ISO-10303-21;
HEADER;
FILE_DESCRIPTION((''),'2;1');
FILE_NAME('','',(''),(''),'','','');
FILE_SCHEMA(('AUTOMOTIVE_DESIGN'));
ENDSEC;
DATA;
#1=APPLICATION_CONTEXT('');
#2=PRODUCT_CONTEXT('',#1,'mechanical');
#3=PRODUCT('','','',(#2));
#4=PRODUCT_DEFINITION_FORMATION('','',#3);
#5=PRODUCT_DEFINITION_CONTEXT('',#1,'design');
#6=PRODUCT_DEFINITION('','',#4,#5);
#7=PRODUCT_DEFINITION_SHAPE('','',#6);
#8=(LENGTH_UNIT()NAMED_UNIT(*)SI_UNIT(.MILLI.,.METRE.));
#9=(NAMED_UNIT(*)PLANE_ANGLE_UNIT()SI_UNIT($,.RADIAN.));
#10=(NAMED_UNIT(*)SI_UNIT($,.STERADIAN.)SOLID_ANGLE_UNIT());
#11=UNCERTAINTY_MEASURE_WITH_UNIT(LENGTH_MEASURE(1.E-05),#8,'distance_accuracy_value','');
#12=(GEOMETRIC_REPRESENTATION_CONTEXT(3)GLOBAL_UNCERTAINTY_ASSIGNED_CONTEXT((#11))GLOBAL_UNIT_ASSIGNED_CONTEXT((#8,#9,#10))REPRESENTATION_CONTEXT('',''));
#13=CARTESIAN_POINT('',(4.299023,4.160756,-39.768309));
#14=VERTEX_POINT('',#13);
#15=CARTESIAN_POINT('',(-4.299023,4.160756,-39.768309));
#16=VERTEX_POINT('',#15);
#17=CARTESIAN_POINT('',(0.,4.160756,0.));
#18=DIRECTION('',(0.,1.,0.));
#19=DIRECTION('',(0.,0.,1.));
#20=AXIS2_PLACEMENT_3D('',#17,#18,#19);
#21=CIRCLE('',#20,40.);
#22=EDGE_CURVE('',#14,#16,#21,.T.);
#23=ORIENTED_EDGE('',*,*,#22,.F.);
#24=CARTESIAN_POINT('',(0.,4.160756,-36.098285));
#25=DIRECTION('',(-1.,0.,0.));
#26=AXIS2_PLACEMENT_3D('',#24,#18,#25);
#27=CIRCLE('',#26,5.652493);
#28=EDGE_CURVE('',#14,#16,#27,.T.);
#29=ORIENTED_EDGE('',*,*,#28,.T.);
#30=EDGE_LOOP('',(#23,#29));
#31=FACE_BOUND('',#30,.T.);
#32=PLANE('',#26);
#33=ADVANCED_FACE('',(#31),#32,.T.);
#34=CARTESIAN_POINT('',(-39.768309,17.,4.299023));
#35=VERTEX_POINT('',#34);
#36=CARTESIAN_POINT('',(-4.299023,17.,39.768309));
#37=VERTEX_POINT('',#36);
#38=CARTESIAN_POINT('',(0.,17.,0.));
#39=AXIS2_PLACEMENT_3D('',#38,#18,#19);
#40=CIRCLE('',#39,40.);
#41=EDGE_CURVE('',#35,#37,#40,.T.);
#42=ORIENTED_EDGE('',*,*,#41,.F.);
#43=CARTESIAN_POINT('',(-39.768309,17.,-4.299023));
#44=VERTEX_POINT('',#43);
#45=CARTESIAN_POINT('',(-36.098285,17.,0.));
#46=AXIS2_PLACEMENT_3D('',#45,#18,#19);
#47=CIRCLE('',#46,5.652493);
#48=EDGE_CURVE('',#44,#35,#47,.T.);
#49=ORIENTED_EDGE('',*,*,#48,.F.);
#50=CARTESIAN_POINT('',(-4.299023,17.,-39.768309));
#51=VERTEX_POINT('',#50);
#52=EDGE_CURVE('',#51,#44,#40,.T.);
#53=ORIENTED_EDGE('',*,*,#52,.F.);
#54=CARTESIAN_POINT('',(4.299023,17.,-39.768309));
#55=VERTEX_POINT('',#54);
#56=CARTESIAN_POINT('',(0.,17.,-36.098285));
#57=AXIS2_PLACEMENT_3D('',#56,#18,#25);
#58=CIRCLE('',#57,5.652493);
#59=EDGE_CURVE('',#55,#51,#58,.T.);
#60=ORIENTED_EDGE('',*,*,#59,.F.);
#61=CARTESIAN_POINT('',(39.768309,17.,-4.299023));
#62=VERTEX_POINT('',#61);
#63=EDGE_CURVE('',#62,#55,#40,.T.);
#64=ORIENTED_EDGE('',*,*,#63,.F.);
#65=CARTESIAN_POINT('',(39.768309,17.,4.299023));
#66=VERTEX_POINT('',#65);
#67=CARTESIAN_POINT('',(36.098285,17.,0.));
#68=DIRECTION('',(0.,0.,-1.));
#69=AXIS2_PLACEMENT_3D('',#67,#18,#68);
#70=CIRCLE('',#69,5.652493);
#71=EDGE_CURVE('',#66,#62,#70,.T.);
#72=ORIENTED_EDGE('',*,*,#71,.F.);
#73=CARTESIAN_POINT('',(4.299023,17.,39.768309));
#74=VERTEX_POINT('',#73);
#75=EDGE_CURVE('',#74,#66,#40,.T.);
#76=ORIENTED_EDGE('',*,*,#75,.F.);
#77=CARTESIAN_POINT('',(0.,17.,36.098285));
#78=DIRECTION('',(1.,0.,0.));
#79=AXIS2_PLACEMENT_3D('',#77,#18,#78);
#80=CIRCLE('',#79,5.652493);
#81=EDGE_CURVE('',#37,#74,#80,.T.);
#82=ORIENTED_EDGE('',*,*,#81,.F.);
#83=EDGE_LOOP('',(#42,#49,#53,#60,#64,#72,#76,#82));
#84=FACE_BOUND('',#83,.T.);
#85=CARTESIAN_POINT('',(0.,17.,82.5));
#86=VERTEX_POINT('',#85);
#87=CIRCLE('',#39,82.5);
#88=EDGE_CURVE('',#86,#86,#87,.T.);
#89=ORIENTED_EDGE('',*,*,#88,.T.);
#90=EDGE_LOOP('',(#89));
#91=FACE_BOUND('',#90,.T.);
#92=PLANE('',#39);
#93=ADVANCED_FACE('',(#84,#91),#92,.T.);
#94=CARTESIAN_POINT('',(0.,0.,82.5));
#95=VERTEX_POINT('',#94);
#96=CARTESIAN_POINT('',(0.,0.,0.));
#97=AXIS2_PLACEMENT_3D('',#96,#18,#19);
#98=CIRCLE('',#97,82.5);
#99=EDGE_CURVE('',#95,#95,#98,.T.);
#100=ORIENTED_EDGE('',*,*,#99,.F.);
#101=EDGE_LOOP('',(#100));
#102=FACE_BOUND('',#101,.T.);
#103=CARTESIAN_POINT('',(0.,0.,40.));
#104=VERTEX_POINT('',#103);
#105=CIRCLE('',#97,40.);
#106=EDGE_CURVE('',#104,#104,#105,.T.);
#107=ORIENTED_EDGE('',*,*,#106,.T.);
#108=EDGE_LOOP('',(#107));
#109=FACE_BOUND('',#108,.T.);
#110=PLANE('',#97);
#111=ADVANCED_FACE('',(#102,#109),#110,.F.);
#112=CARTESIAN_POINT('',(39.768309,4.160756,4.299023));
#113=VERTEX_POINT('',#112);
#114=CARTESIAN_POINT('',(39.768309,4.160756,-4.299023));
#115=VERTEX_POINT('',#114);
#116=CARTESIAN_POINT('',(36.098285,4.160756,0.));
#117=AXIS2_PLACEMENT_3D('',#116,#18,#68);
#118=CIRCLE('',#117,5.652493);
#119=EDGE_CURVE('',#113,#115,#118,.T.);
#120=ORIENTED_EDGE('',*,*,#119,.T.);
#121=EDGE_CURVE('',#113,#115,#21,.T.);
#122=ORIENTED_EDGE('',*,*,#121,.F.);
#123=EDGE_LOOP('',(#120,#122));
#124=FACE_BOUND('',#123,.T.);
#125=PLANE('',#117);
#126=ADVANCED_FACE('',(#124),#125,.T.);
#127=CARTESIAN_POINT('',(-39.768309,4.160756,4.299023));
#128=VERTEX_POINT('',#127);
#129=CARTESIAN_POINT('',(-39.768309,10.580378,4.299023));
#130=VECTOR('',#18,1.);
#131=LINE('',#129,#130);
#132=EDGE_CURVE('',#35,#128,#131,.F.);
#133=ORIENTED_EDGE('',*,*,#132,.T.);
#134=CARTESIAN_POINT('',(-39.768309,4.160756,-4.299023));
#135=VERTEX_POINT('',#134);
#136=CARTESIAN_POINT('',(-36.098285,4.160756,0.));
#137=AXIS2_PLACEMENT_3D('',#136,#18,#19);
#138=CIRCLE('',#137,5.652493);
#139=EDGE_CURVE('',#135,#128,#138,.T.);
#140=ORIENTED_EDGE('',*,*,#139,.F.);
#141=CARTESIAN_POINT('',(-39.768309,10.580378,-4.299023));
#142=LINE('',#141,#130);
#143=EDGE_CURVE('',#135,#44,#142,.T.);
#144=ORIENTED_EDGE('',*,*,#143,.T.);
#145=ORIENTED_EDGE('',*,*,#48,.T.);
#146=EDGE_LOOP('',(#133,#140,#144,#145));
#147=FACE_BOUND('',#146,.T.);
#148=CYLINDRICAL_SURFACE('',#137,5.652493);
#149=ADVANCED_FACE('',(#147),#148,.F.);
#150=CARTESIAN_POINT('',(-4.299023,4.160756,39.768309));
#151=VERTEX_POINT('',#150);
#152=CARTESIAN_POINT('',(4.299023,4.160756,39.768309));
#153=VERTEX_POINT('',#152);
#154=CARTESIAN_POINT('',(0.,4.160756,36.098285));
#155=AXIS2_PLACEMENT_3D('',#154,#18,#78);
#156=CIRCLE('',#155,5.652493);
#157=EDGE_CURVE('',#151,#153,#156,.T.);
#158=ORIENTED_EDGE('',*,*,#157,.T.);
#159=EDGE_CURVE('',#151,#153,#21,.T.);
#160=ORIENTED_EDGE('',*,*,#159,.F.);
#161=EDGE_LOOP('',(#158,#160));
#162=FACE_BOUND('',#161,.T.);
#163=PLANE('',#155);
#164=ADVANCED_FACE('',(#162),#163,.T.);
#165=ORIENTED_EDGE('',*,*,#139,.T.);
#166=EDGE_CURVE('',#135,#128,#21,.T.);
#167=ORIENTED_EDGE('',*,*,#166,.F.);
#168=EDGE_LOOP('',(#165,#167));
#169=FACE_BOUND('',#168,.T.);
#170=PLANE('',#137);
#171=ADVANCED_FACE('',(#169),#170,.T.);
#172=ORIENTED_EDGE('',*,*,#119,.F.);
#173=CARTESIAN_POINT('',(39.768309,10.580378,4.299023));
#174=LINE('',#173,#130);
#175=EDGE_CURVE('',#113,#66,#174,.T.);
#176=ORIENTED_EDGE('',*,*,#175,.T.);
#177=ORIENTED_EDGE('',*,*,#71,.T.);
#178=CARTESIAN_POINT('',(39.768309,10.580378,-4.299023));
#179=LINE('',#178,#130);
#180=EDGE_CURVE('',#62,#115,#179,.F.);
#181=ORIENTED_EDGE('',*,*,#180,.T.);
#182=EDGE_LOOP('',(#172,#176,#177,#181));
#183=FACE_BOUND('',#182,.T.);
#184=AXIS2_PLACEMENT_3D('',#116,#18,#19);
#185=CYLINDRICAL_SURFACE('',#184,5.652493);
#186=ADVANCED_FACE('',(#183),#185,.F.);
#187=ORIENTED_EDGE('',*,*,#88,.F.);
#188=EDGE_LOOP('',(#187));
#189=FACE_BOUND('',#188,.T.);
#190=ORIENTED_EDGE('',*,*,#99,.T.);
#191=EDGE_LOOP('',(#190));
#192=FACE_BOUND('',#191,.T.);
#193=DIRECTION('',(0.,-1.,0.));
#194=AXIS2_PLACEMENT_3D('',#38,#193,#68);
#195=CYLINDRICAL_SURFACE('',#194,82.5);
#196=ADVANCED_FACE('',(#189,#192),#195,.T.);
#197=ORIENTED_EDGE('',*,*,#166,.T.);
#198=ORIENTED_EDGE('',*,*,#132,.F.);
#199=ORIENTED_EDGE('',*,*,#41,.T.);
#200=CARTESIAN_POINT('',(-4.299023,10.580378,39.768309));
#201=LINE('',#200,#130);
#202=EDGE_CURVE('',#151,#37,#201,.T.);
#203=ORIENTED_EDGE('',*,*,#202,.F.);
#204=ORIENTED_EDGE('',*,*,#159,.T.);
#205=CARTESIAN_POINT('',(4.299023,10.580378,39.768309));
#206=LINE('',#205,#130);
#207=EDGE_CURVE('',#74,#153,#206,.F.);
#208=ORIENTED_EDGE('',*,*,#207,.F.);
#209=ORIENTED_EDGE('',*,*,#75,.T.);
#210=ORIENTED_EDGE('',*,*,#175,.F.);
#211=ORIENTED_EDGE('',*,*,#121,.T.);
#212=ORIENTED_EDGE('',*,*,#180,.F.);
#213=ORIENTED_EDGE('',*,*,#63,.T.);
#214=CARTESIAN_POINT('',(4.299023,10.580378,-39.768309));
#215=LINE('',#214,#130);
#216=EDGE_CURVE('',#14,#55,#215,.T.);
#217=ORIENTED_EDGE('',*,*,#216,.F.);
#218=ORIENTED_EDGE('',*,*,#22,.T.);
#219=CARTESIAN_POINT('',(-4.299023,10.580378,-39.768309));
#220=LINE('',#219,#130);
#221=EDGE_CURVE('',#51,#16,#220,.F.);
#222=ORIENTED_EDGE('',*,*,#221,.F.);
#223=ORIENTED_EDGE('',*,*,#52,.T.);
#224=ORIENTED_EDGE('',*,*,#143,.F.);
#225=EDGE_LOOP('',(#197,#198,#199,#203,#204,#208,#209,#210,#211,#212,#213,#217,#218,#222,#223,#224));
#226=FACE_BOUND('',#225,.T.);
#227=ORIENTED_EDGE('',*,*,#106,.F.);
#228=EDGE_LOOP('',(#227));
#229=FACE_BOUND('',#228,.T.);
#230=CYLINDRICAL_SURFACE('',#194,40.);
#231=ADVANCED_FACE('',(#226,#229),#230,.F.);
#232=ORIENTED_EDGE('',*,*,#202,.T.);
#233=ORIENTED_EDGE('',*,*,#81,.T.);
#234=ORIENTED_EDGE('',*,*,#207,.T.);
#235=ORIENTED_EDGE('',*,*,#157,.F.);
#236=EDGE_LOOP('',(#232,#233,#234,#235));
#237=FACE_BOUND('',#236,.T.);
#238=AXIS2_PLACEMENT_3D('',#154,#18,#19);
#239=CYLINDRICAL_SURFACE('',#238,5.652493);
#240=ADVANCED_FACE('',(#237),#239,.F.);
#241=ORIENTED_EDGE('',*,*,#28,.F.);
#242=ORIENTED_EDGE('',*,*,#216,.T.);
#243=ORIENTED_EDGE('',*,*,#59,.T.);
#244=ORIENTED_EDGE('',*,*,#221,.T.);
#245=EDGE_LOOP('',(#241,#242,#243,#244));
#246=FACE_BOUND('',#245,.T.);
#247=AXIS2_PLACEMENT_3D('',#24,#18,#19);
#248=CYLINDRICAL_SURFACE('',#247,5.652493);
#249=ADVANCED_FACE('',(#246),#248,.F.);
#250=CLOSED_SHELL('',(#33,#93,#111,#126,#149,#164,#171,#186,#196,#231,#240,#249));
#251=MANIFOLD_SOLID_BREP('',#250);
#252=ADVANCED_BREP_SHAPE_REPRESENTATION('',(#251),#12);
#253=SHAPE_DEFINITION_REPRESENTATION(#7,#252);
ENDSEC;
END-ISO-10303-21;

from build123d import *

# Parameters (mm, degrees)
SKETCH1_R           = 82.5
BOSS_EXTRUDE1_DEPTH = 17
SKETCH2_R           = 40
CUT_EXTRUDE1_DEPTH  = 118.904622471
SKETCH3_R           = 5.652492576
CUT_EXTRUDE2_DEPTH  = 12.839244405
CIRPATTERN1_COUNT   = 4


with BuildPart() as part:
    # Sketch1 → Boss-Extrude1 (new body)
    with BuildSketch(Plane(origin=(0, 0, 0), x_dir=(1, 0, 0), z_dir=(0, 1, 0))):
        Circle(SKETCH1_R)
    extrude(amount=BOSS_EXTRUDE1_DEPTH)

    # Sketch2 → Cut-Extrude1 (cut, through all)
    with BuildSketch(Plane(origin=(0, 0, 0), x_dir=(1, 0, 0), z_dir=(0, 1, 0))):
        Circle(SKETCH2_R)
    extrude(amount=CUT_EXTRUDE1_DEPTH, mode=Mode.SUBTRACT)

    # Sketch3 → Cut-Extrude2 (cut)
    with BuildSketch(Plane(origin=(0, 17, 0), x_dir=(1, 0, 0), z_dir=(0, 1, 0))):
        with Locations((-36.098285333, 0)):
            Circle(SKETCH3_R)
    cut_extrude2 = extrude(amount=-CUT_EXTRUDE2_DEPTH, mode=Mode.SUBTRACT)

    # CirPattern1: Cut-Extrude2 ×4 about axis
    cirpattern1_axis = Axis((0, 0, 0), (0, 1, 0))
    for i in range(1, CIRPATTERN1_COUNT):
        add(cut_extrude2.rotate(cirpattern1_axis, i * 360 / CIRPATTERN1_COUNT), mode=Mode.SUBTRACT)


solid = part.part
